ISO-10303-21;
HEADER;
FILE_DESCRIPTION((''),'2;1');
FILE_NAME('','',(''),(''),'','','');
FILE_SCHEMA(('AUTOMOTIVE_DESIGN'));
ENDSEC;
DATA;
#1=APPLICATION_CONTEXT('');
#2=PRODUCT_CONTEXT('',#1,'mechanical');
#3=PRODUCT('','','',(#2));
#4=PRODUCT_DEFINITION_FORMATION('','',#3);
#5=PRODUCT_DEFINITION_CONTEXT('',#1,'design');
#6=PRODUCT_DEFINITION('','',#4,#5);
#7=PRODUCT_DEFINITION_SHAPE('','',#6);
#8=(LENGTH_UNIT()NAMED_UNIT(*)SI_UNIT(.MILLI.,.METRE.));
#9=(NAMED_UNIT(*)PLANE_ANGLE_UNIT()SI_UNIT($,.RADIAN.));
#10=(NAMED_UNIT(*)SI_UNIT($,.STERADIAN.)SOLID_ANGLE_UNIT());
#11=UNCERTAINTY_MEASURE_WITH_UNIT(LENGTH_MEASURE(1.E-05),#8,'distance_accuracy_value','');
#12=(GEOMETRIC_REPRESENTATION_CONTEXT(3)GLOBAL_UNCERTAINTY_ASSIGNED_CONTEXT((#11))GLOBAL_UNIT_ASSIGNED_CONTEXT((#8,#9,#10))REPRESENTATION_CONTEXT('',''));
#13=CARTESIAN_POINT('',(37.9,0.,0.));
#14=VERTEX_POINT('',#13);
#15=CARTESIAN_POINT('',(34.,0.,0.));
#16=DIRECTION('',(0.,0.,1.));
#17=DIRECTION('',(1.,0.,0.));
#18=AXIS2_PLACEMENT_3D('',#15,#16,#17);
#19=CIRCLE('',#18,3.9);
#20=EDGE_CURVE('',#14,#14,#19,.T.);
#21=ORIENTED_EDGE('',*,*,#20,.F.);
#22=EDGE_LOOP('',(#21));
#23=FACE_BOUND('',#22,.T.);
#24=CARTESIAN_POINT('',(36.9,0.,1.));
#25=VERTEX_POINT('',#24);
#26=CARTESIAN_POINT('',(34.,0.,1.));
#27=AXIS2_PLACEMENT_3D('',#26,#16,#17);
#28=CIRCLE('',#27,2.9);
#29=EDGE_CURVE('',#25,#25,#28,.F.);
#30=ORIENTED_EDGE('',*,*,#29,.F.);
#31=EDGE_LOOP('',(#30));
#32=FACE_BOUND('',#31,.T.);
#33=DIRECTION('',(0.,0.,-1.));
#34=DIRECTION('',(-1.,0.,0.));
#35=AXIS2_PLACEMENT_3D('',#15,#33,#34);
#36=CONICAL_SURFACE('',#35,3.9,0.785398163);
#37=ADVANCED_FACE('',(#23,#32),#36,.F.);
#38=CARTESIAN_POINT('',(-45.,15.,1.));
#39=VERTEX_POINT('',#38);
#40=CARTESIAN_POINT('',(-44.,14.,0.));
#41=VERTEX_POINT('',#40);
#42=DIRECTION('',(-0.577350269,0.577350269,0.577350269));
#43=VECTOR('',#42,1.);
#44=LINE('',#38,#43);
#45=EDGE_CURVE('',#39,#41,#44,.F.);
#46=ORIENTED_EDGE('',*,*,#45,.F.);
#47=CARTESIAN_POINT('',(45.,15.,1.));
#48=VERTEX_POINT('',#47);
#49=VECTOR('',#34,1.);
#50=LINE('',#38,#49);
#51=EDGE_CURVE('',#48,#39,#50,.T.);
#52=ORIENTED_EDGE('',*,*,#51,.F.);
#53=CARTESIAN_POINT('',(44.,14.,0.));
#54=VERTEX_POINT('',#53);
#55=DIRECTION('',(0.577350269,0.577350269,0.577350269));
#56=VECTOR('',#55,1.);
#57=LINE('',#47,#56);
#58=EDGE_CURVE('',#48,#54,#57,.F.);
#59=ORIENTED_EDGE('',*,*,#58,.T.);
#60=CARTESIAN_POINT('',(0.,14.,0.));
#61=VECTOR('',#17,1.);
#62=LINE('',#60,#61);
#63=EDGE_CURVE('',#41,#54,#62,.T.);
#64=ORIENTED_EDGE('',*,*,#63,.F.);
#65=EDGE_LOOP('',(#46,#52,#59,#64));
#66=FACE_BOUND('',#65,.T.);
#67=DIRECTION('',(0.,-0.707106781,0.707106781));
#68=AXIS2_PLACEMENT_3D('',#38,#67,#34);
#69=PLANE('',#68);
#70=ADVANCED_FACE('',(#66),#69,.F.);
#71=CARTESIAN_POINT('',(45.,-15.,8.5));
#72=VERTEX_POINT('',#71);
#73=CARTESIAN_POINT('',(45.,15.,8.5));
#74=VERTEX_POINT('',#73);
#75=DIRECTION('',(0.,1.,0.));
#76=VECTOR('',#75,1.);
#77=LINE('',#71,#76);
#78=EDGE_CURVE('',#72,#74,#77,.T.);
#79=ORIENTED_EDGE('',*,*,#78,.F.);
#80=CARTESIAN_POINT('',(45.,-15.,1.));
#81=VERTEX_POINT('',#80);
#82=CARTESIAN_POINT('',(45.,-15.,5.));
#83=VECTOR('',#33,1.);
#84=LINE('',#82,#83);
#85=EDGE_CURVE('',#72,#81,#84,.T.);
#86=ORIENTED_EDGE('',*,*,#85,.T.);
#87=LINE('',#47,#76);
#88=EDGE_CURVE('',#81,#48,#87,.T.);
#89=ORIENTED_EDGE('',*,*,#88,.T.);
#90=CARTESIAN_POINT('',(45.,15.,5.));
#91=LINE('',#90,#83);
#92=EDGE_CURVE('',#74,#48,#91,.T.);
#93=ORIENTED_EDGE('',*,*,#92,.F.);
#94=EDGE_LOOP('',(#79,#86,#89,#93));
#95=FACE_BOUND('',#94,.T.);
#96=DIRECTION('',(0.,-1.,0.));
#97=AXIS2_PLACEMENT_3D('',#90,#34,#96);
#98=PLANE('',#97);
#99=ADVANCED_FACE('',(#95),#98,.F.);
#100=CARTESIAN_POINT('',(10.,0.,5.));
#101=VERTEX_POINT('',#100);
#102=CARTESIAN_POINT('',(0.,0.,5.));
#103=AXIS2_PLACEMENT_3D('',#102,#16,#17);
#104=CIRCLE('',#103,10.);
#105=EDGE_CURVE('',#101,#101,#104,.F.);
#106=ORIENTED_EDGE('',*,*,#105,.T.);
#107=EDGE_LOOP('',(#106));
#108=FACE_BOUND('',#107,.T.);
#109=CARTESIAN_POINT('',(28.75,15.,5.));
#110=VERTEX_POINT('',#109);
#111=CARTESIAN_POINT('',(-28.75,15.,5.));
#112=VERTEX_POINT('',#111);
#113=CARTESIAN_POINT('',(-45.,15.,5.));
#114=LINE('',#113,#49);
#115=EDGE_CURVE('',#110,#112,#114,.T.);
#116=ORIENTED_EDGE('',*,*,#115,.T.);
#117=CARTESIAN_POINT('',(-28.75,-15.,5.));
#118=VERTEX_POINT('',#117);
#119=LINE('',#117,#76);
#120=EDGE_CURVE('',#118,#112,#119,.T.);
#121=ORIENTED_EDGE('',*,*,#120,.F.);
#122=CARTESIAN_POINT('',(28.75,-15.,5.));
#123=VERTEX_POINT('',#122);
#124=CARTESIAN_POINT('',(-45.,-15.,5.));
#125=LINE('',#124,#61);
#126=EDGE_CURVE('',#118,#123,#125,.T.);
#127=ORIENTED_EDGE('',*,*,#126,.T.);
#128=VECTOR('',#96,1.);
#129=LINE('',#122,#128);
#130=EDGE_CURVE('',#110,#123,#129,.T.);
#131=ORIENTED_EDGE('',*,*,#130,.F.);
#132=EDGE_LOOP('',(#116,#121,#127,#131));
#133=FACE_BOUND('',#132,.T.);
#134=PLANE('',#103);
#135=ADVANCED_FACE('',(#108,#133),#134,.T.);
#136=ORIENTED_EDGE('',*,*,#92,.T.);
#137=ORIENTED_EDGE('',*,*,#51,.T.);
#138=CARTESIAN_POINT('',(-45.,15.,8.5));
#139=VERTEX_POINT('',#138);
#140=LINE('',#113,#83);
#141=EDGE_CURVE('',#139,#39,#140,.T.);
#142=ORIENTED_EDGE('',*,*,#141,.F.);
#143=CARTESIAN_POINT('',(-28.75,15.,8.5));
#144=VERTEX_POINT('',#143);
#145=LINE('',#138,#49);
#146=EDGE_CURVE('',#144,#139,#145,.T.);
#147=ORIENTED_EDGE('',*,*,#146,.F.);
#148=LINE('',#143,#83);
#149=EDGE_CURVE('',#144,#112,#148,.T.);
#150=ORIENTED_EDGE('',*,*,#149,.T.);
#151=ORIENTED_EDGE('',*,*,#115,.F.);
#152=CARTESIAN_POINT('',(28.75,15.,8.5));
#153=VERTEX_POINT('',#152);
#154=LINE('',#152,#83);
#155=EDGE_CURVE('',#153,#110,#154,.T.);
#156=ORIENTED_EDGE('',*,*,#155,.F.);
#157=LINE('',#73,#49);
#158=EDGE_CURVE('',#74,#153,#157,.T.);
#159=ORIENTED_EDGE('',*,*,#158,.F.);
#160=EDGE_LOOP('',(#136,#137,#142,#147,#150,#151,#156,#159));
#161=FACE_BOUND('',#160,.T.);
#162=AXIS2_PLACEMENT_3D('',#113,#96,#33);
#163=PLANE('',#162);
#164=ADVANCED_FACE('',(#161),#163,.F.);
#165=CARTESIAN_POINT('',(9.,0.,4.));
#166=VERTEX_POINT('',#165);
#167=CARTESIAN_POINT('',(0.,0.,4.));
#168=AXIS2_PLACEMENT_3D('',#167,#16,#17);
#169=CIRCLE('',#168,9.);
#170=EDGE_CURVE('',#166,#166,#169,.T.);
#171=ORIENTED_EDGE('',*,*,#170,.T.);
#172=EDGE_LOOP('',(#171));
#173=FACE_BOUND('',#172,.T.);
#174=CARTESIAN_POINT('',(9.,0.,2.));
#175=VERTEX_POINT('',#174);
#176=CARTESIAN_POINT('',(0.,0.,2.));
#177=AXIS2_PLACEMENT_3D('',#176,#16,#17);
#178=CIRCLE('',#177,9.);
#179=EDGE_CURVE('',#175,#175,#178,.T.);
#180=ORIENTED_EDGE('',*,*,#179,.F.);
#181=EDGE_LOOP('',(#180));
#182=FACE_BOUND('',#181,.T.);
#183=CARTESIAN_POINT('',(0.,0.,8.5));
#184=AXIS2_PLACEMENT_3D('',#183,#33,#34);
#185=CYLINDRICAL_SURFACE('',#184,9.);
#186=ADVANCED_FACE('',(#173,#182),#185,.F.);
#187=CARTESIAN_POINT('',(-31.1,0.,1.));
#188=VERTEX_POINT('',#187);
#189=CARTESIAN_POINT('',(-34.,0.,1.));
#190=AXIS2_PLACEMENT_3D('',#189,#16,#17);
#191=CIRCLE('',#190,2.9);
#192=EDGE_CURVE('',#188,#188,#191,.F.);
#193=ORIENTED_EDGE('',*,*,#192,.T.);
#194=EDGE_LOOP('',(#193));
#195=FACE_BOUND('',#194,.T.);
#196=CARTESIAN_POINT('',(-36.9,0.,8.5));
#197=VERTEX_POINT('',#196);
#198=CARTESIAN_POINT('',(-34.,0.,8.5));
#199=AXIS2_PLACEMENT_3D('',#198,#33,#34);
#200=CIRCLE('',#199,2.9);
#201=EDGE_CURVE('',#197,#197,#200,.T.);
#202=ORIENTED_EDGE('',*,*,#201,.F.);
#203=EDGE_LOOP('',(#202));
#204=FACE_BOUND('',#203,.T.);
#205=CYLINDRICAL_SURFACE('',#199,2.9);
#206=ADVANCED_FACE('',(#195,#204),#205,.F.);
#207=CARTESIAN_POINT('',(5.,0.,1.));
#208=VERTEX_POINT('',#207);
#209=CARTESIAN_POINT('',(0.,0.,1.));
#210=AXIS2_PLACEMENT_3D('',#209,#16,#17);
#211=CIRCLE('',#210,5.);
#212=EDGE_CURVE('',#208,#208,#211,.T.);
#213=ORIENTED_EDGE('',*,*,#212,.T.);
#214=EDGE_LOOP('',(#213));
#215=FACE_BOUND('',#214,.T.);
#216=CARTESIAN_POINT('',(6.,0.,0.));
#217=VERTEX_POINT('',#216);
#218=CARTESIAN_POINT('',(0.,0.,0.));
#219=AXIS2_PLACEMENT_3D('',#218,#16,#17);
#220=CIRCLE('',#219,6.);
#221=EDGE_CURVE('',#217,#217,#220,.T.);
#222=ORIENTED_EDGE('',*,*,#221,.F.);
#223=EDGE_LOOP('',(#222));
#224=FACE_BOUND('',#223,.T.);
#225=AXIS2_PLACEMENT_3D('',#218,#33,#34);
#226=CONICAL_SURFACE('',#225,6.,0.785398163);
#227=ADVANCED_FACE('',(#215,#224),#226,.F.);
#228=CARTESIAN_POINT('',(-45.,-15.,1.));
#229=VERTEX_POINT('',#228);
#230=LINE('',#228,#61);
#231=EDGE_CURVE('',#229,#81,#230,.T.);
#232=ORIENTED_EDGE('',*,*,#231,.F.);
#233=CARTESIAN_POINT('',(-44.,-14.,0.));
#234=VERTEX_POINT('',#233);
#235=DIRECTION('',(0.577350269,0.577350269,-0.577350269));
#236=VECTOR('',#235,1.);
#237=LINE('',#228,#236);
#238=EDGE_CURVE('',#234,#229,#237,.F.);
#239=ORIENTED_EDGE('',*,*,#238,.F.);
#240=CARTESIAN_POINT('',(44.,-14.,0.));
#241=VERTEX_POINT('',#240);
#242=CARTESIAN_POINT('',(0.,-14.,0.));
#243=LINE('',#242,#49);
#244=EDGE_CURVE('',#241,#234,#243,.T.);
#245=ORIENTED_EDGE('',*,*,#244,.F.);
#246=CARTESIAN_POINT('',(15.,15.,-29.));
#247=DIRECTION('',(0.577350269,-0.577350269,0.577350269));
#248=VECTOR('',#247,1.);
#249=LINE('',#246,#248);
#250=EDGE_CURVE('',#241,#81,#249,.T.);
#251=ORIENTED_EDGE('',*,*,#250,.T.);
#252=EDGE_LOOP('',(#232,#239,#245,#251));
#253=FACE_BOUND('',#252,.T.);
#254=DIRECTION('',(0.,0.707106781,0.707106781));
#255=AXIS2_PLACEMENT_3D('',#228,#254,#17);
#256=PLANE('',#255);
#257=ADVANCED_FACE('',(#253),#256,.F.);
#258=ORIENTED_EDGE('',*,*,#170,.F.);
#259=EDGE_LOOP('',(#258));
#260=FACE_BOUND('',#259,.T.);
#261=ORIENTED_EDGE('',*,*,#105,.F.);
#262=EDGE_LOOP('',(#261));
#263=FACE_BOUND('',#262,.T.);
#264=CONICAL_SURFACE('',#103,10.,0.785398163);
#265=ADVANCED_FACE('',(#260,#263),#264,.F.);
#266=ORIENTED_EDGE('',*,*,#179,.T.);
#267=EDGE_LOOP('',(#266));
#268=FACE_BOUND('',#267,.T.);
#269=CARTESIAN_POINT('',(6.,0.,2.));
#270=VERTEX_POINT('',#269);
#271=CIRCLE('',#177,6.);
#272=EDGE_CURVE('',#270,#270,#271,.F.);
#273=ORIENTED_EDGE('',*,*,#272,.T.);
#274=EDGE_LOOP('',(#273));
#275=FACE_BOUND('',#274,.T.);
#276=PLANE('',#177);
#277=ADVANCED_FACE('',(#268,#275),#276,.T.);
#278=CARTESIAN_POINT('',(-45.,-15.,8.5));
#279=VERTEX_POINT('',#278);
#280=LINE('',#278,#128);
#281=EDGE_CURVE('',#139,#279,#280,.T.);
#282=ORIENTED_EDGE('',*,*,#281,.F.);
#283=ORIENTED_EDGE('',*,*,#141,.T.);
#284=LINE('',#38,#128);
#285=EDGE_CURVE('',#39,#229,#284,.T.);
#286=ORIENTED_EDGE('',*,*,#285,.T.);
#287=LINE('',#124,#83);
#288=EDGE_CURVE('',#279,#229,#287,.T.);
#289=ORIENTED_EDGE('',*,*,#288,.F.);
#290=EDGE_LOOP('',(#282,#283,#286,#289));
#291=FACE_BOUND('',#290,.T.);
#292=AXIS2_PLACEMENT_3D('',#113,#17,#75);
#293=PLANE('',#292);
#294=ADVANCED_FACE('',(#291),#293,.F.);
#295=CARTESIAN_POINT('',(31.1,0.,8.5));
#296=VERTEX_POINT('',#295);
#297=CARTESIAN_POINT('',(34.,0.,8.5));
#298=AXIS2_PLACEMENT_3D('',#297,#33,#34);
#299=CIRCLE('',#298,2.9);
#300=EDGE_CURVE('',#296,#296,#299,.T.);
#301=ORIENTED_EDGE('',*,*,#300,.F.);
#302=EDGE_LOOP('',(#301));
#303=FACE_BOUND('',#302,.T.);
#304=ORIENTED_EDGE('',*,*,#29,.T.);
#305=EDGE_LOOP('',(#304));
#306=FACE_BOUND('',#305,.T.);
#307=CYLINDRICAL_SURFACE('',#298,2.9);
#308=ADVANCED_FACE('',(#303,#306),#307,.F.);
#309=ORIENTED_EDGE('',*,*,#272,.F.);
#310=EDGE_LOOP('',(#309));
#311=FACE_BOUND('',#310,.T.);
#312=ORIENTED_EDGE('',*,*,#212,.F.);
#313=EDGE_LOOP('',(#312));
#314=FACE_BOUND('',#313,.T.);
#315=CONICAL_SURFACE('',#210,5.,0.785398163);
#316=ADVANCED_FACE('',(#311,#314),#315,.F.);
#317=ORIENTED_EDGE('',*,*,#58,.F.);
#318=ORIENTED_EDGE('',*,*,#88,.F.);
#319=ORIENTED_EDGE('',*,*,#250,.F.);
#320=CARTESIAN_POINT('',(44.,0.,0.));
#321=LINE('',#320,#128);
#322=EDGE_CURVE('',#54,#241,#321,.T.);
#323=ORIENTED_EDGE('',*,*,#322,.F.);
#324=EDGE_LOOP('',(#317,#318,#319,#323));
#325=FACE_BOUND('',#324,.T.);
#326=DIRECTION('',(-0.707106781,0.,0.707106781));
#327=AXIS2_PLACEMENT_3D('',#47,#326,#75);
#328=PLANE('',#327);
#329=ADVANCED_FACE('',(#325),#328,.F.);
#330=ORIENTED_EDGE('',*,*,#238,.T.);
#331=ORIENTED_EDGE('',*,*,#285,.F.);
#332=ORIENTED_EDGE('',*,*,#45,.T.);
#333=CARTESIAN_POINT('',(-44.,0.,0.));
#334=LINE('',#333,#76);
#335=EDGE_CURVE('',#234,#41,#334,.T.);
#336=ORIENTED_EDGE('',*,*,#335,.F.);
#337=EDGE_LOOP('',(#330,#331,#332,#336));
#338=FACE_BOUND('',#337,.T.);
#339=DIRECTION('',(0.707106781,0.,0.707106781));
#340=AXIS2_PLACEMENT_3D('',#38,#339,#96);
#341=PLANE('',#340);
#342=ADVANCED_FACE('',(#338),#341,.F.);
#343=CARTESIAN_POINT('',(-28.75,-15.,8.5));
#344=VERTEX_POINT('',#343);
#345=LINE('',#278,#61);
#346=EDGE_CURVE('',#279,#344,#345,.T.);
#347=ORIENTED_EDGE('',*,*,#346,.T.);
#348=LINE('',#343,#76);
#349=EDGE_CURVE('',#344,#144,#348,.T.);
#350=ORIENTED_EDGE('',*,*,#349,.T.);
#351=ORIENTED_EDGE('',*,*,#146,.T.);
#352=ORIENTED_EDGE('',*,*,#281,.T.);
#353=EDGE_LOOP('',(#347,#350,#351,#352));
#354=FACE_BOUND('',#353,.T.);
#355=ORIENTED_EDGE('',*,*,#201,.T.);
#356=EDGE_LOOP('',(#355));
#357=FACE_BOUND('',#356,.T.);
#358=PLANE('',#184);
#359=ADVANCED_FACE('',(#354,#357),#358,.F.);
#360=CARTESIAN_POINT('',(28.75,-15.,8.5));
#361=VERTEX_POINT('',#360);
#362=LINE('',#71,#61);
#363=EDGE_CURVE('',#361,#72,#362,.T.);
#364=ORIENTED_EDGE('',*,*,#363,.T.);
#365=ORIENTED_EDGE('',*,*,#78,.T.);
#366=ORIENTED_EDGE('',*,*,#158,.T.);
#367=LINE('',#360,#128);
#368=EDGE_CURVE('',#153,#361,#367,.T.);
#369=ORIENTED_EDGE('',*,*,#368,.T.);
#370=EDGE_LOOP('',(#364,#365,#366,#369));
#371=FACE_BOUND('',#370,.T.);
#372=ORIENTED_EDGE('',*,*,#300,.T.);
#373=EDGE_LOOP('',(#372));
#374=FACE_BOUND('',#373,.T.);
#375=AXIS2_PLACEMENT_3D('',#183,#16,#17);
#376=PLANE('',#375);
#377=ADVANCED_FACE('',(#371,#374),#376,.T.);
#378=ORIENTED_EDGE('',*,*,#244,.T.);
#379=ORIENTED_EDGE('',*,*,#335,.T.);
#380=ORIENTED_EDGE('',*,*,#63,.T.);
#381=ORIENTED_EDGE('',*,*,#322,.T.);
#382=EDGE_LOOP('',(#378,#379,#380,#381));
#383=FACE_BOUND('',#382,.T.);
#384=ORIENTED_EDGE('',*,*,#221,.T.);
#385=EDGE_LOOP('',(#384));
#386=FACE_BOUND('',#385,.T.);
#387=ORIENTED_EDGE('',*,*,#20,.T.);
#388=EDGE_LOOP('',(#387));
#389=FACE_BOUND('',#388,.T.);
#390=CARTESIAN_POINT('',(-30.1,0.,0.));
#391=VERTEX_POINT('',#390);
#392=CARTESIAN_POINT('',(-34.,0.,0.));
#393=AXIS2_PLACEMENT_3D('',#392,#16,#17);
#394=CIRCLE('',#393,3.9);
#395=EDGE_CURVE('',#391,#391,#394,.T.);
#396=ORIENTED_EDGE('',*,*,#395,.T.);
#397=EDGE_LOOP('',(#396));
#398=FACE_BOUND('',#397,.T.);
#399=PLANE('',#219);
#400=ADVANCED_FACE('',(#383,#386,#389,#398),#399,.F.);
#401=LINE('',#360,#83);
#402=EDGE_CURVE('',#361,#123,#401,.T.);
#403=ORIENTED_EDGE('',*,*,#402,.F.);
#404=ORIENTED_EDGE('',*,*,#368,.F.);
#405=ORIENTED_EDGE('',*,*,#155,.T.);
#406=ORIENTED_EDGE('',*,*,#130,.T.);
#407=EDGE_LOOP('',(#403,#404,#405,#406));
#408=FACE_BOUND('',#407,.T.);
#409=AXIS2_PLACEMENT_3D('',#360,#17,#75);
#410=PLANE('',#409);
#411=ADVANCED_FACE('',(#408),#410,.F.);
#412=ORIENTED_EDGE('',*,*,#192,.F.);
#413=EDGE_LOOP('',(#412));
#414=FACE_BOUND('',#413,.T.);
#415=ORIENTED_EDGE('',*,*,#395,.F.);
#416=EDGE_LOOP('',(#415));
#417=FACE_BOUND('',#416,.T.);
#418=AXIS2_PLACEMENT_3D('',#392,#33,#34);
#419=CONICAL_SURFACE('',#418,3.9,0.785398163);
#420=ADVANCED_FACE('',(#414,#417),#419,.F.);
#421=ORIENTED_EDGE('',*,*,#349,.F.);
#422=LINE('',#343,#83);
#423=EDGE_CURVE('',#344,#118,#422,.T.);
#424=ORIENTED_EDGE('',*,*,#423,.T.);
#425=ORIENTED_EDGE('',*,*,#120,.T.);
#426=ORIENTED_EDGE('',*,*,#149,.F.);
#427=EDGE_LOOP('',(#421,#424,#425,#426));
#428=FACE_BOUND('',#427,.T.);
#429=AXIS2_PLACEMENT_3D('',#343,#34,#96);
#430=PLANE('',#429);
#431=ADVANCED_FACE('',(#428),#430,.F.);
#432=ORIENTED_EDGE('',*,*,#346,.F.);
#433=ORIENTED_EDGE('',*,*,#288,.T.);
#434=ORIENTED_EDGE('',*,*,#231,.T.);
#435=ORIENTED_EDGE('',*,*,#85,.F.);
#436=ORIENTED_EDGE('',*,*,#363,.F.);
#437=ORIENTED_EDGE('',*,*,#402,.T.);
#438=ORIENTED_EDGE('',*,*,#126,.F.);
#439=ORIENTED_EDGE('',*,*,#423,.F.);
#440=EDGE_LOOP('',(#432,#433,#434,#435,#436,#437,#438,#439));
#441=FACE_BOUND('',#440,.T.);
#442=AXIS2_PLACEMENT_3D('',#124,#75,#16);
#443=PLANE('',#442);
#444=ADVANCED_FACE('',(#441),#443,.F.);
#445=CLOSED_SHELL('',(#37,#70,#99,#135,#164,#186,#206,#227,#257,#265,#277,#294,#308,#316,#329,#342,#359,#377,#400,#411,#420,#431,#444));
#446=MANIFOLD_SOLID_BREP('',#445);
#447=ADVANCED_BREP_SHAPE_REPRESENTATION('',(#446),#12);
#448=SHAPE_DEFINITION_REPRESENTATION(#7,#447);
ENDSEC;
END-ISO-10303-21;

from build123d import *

# Parameters (mm, degrees)
SKETCH_1_W               = 90
SKETCH_1_H               = 30
EXTRUDE_1_DEPTH          = 5
SKETCH_2_W               = 16.25
SKETCH_2_H               = 30
EXTRUDE_2_DEPTH          = 3.5
CUT_EXTRUDE_1_DEPTH      = 49.189729196
CUT_EXTRUDE_1_DEPTH_BACK = 49.189729196
SKETCH_3_R               = 2.9
CHAMFER_1_SIZE           = 1
CUT_EXTRUDE_2_DEPTH      = 48.696960071
CUT_EXTRUDE_2_DEPTH_BACK = 3
SKETCH_4_R               = 9
CHAMFER_2_SIZE           = 1
CUT_EXTRUDE_3_DEPTH      = 48.877447718
CUT_EXTRUDE_3_DEPTH_BACK = 48.877447718
SKETCH_5_R               = 5
CHAMFER_3_SIZE           = 1


with BuildPart() as part:
    # 草图1 → 凸台-拉伸1 (new body)
    with BuildSketch(Plane.XY):
        Rectangle(SKETCH_1_W, SKETCH_1_H)
    extrude(amount=EXTRUDE_1_DEPTH)

    # 草图2 → 凸台-拉伸2 (add)
    with BuildSketch(Plane.XY.offset(5)):
        with Locations((36.875, 0)):
            Rectangle(SKETCH_2_W, SKETCH_2_H)
        with Locations((-36.875, 0)):
            Rectangle(SKETCH_2_W, SKETCH_2_H)
    extrude(amount=EXTRUDE_2_DEPTH)

    # 草图3 → 切除-拉伸1 (cut, two sides: drawn at the far end of the back side and taken through both)
    with BuildSketch(Plane(origin=(0, 0, 0), x_dir=(-1, 0, 0), z_dir=(0, 0, -1)).offset(-CUT_EXTRUDE_1_DEPTH_BACK)):
        with Locations((34, 0)):
            Circle(SKETCH_3_R)
        with Locations((-34, 0)):
            Circle(SKETCH_3_R)
    extrude(amount=CUT_EXTRUDE_1_DEPTH + CUT_EXTRUDE_1_DEPTH_BACK, mode=Mode.SUBTRACT)

    # 倒角1
    chamfer_1_edges = [part.edges().sort_by_distance(p)[0] for p in [
        (-31.1, 0, 0),
        (36.9, 0, 0),
        (0, 15, 0),
        (45, 0, 0),
        (0, -15, 0),
        (-45, 0, 0),
    ]]
    chamfer(chamfer_1_edges, length=CHAMFER_1_SIZE)

    # 草图4 → 切除-拉伸2 (cut, two sides: drawn at the far end of the back side and taken through both)
    with BuildSketch(Plane.XY.offset(5).offset(-CUT_EXTRUDE_2_DEPTH_BACK)):
        Circle(SKETCH_4_R)
    extrude(amount=CUT_EXTRUDE_2_DEPTH + CUT_EXTRUDE_2_DEPTH_BACK, mode=Mode.SUBTRACT)

    # 倒角2
    chamfer_2_edges = [part.edges().sort_by_distance(p)[0] for p in [
        (-9, 0, 5),
    ]]
    chamfer(chamfer_2_edges, length=CHAMFER_2_SIZE)

    # 草图5 → 切除-拉伸3 (cut, two sides: drawn at the far end of the back side and taken through both)
    with BuildSketch(Plane.XY.offset(2).offset(-CUT_EXTRUDE_3_DEPTH_BACK)):
        Circle(SKETCH_5_R)
    extrude(amount=CUT_EXTRUDE_3_DEPTH + CUT_EXTRUDE_3_DEPTH_BACK, mode=Mode.SUBTRACT)

    # 倒角3
    chamfer_3_edges = [part.edges().sort_by_distance(p)[0] for p in [
        (-5, 0, 2),
        (-5, 0, 0),
    ]]
    chamfer(chamfer_3_edges, length=CHAMFER_3_SIZE - 0.0001)  # a hair under: the kernel refuses the full size


solid = part.part
